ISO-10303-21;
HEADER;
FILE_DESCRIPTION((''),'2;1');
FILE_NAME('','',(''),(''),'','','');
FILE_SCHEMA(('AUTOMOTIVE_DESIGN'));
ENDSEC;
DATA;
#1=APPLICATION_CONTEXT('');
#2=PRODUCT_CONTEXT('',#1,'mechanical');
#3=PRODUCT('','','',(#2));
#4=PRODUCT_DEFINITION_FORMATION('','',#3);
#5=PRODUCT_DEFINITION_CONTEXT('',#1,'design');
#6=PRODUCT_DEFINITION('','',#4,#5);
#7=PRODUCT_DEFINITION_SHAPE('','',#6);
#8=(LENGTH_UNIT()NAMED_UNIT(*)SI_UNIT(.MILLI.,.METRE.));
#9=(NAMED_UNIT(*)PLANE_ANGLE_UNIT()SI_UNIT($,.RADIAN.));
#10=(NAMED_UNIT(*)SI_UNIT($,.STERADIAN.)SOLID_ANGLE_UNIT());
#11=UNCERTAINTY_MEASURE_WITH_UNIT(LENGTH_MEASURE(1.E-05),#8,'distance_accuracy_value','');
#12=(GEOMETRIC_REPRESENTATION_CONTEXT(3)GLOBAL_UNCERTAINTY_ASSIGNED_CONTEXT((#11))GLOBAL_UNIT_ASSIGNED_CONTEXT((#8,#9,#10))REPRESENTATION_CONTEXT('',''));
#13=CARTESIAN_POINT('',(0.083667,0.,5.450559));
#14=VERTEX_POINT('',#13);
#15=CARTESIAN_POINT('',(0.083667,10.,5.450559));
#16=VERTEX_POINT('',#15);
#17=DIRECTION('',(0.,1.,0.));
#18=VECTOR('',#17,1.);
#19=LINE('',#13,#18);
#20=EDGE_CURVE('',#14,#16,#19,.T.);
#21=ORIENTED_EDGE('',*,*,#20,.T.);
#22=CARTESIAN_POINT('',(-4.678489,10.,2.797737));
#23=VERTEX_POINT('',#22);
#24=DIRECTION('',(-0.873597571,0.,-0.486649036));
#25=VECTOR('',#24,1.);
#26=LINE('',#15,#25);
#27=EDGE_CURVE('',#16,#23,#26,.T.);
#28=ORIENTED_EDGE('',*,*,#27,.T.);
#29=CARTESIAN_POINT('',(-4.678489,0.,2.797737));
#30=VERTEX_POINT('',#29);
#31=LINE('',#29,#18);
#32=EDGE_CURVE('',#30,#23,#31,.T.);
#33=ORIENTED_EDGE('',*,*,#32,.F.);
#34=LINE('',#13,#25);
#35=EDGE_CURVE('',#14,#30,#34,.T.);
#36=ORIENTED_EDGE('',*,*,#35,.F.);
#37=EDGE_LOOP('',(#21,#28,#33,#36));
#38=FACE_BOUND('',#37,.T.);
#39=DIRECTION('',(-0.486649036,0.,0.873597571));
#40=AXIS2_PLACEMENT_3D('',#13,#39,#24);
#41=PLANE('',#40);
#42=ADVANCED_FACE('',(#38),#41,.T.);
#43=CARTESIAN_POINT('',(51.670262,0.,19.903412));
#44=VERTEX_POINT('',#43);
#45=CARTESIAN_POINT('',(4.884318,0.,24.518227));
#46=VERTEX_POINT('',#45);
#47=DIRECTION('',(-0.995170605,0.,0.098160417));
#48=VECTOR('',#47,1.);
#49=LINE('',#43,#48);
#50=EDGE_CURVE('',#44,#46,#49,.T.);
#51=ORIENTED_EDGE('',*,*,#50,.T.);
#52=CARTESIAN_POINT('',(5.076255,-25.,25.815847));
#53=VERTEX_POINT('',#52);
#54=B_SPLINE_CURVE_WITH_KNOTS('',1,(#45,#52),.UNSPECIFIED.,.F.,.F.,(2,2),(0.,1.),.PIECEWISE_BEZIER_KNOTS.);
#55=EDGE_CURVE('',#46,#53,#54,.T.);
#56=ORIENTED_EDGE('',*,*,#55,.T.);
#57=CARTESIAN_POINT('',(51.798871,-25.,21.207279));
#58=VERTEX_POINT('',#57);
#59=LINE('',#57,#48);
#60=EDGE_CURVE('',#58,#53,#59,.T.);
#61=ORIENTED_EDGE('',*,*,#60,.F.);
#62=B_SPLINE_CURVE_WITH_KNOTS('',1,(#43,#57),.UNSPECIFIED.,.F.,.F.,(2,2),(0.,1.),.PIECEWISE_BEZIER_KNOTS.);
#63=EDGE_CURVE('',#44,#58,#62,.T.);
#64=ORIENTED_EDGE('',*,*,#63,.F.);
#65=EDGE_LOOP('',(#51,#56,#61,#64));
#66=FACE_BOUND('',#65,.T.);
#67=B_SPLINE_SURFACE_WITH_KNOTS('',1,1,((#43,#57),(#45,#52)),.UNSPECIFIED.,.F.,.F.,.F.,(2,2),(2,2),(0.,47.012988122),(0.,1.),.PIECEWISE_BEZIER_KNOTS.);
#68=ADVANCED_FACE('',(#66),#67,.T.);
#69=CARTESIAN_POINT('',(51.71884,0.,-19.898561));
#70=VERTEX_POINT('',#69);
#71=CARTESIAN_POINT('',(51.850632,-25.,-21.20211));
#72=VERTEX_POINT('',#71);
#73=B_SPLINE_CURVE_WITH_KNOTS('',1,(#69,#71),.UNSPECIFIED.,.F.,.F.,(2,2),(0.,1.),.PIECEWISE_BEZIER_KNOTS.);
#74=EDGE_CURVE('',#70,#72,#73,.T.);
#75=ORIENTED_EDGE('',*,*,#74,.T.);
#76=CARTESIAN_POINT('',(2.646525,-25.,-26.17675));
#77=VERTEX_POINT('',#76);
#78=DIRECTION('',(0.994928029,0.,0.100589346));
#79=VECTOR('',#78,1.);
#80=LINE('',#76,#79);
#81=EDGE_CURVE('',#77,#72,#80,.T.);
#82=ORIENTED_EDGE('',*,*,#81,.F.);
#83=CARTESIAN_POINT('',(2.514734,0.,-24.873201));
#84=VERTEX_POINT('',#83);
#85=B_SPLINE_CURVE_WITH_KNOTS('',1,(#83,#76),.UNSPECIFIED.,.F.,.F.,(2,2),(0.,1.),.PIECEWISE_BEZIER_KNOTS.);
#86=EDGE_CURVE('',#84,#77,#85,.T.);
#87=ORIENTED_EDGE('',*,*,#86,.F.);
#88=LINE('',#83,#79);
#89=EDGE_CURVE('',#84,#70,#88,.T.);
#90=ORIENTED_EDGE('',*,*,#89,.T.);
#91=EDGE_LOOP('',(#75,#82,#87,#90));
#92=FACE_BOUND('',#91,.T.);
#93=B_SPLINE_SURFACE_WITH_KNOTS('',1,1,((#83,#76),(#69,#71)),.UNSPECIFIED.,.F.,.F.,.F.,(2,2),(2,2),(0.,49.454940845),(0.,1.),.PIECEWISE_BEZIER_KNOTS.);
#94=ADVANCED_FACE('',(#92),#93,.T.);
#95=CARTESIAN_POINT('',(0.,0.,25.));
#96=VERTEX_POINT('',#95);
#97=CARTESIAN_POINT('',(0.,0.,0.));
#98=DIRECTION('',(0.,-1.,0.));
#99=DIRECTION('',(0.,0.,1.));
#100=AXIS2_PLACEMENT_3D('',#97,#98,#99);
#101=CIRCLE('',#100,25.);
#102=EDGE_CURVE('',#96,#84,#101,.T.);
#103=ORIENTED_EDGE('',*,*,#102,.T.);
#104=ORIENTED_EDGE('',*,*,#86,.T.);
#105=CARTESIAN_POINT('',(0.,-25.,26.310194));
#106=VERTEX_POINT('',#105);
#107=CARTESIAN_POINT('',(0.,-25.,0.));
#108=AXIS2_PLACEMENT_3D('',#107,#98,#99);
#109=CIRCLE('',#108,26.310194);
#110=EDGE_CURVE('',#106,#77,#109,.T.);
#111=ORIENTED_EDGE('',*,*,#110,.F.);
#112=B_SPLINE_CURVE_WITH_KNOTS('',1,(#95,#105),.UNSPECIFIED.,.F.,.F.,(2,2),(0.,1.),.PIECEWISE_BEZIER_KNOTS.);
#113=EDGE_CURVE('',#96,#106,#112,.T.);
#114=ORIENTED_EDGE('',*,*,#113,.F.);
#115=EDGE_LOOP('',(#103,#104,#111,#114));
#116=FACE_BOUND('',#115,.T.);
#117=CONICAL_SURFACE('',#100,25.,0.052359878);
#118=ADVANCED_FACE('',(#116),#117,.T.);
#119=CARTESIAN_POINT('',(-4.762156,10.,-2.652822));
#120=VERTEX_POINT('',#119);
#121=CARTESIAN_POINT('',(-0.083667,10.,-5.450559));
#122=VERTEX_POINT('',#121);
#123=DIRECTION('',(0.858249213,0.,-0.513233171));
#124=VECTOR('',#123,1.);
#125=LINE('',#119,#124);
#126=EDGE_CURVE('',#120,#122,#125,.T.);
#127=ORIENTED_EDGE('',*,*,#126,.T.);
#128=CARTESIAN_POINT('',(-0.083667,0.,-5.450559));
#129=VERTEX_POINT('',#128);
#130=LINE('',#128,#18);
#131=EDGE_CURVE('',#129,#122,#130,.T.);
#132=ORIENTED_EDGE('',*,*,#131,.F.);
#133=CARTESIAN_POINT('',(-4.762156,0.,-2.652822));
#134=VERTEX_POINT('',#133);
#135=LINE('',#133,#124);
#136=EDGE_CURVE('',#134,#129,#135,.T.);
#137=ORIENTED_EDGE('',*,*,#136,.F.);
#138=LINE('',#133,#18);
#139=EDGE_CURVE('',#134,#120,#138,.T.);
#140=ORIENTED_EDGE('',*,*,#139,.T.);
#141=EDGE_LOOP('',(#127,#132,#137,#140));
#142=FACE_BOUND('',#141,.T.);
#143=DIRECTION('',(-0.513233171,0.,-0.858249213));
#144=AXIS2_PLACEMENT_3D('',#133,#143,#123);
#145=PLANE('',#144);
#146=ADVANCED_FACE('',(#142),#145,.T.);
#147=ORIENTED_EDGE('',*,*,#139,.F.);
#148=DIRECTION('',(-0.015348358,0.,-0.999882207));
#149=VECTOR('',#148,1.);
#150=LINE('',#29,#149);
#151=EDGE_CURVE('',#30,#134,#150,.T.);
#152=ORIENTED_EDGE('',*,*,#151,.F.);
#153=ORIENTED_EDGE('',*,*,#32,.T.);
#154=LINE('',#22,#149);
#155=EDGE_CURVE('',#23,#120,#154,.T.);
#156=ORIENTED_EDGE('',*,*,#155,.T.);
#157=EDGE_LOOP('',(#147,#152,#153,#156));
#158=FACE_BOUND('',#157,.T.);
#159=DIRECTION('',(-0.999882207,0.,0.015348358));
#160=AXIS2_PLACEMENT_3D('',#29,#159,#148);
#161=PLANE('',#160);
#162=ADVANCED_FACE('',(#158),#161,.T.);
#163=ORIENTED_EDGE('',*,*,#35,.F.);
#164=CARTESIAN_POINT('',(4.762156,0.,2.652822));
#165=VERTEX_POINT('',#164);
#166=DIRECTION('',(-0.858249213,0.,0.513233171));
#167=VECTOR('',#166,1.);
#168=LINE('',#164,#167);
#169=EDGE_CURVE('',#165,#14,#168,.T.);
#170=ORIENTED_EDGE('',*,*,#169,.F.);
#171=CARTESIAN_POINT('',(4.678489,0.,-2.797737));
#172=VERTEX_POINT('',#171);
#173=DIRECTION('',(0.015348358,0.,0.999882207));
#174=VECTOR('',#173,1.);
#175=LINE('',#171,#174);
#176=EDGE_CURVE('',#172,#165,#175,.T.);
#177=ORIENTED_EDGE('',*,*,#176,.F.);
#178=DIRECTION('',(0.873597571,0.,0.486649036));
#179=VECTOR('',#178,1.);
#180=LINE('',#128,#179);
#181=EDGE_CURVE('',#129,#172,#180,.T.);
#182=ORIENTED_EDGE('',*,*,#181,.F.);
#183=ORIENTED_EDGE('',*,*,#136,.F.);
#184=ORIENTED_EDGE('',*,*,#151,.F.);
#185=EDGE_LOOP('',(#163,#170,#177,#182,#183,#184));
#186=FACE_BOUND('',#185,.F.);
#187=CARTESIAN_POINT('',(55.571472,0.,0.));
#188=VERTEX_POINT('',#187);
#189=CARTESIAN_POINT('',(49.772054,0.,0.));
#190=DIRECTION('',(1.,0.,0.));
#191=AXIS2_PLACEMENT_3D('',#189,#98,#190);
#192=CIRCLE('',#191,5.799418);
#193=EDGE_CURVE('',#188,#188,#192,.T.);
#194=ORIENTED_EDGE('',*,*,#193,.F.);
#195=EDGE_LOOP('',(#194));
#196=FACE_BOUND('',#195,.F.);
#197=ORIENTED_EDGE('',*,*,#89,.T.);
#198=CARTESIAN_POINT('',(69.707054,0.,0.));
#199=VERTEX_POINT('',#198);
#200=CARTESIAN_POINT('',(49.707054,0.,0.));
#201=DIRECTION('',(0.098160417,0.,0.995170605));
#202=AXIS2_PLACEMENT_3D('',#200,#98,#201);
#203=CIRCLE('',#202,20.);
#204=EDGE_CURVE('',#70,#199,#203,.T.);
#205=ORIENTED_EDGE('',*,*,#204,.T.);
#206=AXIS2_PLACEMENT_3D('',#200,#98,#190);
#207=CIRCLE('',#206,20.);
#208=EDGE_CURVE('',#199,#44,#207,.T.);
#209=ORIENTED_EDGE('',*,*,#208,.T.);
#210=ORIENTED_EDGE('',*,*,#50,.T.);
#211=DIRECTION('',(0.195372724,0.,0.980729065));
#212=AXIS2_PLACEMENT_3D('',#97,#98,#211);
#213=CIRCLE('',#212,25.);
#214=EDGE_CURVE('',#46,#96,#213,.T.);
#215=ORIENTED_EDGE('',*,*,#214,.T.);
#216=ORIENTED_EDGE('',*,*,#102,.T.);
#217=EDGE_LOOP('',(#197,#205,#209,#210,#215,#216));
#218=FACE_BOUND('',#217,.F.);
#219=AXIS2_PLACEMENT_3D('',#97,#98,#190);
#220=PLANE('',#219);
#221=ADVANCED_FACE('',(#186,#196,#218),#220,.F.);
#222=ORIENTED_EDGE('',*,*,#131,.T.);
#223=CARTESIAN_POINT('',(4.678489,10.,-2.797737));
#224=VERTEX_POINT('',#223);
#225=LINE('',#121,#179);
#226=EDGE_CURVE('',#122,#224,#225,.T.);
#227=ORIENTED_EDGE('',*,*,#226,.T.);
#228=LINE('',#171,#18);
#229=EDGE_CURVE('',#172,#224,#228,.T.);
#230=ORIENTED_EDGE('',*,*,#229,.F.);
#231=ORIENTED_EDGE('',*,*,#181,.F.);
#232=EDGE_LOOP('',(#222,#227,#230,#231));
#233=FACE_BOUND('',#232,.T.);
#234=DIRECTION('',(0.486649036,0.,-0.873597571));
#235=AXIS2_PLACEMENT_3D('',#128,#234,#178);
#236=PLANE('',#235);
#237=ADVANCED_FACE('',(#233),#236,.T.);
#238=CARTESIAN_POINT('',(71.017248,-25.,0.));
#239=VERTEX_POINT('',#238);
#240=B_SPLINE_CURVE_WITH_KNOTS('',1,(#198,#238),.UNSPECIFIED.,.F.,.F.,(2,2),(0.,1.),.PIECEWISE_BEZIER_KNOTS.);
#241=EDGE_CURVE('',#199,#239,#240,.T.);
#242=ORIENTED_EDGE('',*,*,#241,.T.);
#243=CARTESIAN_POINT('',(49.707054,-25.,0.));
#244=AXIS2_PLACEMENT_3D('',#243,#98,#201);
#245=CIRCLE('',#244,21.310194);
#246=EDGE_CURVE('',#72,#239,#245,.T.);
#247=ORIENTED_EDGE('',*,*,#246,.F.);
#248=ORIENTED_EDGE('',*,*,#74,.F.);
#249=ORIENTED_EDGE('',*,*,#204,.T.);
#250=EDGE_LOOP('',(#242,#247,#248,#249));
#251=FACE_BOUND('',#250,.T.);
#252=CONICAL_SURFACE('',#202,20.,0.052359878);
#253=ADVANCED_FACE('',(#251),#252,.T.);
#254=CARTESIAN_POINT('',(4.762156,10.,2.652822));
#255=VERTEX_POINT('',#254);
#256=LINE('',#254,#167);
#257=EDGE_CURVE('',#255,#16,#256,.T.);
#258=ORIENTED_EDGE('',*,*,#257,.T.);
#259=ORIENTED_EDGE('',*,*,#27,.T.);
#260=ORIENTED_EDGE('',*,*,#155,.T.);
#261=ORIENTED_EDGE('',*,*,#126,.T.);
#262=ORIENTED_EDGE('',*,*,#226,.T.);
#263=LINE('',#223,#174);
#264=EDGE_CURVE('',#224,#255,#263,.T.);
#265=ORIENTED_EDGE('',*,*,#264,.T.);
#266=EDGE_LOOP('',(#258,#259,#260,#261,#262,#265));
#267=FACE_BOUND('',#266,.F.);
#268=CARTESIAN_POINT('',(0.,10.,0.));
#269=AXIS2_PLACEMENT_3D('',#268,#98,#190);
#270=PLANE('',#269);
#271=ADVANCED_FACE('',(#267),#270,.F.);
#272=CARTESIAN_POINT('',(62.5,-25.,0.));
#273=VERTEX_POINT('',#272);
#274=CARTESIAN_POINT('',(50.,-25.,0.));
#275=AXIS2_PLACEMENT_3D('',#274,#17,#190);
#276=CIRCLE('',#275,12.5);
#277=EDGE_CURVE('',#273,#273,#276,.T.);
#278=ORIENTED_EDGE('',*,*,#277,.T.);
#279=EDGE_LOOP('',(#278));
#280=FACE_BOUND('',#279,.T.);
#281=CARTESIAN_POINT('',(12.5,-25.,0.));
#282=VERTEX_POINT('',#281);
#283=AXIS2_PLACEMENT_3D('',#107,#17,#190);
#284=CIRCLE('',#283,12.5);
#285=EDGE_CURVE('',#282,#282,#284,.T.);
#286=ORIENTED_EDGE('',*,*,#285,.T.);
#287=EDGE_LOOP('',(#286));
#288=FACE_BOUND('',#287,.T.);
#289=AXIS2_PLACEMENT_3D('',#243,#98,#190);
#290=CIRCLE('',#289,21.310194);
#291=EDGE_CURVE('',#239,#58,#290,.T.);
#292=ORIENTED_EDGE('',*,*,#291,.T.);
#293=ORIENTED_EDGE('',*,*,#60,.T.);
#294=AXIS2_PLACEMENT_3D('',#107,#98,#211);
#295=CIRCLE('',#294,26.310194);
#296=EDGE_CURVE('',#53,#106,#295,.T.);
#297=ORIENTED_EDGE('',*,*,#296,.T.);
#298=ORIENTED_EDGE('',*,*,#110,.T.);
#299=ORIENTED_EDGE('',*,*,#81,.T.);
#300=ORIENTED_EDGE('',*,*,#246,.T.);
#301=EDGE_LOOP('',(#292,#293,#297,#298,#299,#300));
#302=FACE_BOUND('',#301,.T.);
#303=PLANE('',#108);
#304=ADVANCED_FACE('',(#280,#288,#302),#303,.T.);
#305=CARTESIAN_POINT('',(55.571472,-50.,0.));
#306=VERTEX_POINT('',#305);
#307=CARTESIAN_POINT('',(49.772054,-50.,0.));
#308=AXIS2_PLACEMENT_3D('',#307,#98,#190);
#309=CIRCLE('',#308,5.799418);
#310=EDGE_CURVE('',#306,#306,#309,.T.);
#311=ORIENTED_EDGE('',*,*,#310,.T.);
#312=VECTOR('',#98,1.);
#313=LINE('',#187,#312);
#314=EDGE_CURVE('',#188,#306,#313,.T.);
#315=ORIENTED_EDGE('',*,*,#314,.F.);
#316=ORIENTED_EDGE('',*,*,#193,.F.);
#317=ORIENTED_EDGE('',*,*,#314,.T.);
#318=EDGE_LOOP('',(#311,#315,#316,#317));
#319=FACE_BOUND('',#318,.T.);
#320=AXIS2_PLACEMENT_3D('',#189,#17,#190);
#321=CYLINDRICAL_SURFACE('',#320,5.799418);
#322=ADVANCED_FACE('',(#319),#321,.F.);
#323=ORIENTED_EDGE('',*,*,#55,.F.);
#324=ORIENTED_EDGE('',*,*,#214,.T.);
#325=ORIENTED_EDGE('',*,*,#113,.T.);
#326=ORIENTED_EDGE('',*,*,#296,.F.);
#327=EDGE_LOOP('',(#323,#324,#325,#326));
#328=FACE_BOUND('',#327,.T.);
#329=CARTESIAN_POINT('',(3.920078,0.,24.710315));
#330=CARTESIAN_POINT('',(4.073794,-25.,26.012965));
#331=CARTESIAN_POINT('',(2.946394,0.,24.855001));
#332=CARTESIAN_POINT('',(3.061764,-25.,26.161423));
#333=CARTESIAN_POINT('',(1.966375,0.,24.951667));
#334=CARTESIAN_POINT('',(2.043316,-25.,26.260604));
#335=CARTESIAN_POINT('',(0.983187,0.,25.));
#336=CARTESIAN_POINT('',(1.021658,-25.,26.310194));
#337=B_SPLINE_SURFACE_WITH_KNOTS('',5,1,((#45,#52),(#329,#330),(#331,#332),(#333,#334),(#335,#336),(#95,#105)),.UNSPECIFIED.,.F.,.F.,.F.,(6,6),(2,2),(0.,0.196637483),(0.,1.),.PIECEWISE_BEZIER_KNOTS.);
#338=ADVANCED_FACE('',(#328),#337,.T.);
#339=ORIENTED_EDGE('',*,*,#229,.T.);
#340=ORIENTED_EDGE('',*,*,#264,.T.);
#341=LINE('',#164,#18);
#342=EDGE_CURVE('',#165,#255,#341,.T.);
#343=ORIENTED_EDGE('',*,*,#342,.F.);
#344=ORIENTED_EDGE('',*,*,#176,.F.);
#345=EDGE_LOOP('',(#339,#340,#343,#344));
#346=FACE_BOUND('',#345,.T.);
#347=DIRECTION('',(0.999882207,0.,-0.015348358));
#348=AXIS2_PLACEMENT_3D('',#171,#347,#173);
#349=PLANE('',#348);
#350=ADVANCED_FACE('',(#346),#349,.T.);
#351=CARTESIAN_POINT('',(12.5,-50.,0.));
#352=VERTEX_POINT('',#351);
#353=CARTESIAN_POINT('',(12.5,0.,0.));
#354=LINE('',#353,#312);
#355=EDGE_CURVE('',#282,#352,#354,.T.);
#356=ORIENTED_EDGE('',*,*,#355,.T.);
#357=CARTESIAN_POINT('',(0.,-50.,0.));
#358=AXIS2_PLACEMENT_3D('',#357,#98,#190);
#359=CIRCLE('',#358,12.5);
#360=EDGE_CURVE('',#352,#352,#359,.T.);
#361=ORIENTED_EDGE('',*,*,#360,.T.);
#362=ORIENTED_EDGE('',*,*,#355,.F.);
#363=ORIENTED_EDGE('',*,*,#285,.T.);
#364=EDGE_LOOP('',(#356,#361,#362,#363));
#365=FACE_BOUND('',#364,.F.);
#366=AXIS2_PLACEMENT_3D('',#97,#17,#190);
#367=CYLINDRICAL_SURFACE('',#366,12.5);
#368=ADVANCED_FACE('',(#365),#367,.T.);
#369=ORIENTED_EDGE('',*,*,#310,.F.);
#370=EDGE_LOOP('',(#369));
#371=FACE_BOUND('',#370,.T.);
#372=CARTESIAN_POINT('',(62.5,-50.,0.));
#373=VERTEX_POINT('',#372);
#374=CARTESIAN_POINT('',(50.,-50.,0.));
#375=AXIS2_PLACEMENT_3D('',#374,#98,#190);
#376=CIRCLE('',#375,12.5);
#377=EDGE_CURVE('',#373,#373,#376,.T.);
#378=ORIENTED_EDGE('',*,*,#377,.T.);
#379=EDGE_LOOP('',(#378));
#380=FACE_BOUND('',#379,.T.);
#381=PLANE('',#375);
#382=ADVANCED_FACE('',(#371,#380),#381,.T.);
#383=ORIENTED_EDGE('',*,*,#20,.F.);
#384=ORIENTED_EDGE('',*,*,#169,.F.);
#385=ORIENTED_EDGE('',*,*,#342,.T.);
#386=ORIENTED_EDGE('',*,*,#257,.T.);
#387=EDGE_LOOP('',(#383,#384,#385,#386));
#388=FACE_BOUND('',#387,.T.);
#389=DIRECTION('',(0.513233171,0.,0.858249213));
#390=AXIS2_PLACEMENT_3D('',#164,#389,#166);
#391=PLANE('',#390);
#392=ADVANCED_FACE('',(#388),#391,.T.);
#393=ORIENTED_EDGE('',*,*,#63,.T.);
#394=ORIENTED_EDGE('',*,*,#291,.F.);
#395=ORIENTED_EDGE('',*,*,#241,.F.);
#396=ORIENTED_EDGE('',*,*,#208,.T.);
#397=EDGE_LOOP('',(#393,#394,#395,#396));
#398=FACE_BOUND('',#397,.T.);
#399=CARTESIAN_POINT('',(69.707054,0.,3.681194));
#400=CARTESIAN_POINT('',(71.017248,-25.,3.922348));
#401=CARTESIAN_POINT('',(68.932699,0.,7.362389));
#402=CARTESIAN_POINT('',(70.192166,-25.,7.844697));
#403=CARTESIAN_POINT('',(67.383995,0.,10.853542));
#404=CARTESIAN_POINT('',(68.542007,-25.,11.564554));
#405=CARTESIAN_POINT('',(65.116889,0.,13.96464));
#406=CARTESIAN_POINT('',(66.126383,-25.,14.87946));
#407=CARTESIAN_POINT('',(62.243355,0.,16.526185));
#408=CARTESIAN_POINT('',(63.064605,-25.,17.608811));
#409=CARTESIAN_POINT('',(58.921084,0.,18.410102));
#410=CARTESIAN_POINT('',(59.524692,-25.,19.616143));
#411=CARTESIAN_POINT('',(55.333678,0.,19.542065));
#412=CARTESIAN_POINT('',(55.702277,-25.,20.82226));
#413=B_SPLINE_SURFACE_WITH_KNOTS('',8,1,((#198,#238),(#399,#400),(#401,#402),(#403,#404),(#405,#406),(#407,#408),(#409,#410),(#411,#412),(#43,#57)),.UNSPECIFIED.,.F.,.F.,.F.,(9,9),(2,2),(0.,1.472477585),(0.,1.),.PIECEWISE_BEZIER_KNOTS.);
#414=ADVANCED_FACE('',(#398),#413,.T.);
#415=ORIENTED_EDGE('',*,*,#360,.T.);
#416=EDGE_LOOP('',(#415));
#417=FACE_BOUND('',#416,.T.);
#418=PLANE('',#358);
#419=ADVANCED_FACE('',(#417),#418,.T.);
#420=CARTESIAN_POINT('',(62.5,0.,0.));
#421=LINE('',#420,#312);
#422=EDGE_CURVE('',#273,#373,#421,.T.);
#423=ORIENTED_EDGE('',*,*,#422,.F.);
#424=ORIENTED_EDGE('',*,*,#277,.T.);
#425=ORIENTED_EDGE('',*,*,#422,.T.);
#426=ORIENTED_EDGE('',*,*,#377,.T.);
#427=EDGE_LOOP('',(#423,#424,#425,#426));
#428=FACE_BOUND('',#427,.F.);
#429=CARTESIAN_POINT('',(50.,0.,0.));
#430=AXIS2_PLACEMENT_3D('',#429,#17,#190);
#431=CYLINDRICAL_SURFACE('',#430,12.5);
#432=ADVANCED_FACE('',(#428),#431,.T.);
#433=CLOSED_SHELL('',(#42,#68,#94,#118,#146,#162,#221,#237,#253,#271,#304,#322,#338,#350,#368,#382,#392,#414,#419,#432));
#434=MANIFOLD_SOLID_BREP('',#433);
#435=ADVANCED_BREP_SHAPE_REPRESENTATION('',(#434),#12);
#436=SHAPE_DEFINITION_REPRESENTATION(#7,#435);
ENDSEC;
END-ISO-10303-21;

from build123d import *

# Parameters (mm, degrees)
F1_DEPTH = 25
F1_TAPER = -3
F2_R     = 12.5
F3_DEPTH = 50
F4_R     = 5.7994178108
F5_DEPTH = 50
F7_DEPTH = 10


# Not quite as in the source:
# - a feature names something its author has since deleted; it is built from what else it names


with BuildPart() as f1:
    # F0 (on Front) → F1 (new body)
    with BuildSketch(Plane.XZ):
        with BuildLine():
            Line((4.8843180895, 24.5182266243), (0, 25))
            ThreePointArc((0, 25), (-24.9682800601, -1.2589641933), (2.5147336452, -24.8732007328))
            ThreePointArc((2.5147336452, -24.8732007328), (18.5454622635, -16.7650180267), (25, 0))
            ThreePointArc((25, 0), (19.3275444927, 15.8570496588), (4.8843180895, 24.5182266243))
        make_face()
        with BuildLine():
            ThreePointArc((4.8843180895, 24.5182266243), (2.4540104311, 24.8792651178), (0, 25))
            Line((0, 25), (4.8843180895, 24.5182266243))
        make_face()
        with BuildLine():
            ThreePointArc((25, 0), (18.5454622635, -16.7650180267), (2.5147336452, -24.8732007328))
            Line((2.5147336452, -24.8732007328), (51.7188404795, -19.8985605862))
            ThreePointArc((51.7188404795, -19.8985605862), (29.7070684597, -0.0244101143), (51.6702619082, 19.9034120943))
            Line((51.6702619082, 19.9034120943), (4.8843180895, 24.5182266243))
            ThreePointArc((4.8843180895, 24.5182266243), (19.3275444927, 15.8570496588), (25, 0))
        make_face()
        with BuildLine():
            ThreePointArc((51.6702619082, 19.9034120943), (29.7070684597, -0.0244101143), (51.7188404795, -19.8985605862))
            ThreePointArc((51.7188404795, -19.8985605862), (64.5434233741, -13.4120144213), (69.7070535633, 0))
            ThreePointArc((69.7070535633, 0), (64.5270428835, 13.430112306), (51.6702619082, 19.9034120943))
        make_face()
    extrude(amount=F1_DEPTH, taper=F1_TAPER)

    # F2 (on Front) → F3 (join)
    with BuildSketch(Plane.XZ):
        Circle(F2_R)
        with Locations((50, 0)):
            Circle(F2_R)
    extrude(amount=F3_DEPTH)

    # F4 (on Front) → F5 (cut)
    with BuildSketch(Plane.XZ):
        with Locations((49.772053957, 0)):
            Circle(F4_R)
    extrude(amount=F5_DEPTH, mode=Mode.SUBTRACT)

    # F6 (on Front) → F7 (join)
    with BuildSketch(Plane.XZ):
        Polygon((-0.0836669881, -5.4505592747), (4.6784893026, -2.7977373745), (4.7621562908, 2.6528219002), (0.0836669881, 5.4505592747), (-4.6784893026, 2.7977373745), (-4.7621562908, -2.6528219002), align=None)
    extrude(amount=-F7_DEPTH)


solid = f1.part
